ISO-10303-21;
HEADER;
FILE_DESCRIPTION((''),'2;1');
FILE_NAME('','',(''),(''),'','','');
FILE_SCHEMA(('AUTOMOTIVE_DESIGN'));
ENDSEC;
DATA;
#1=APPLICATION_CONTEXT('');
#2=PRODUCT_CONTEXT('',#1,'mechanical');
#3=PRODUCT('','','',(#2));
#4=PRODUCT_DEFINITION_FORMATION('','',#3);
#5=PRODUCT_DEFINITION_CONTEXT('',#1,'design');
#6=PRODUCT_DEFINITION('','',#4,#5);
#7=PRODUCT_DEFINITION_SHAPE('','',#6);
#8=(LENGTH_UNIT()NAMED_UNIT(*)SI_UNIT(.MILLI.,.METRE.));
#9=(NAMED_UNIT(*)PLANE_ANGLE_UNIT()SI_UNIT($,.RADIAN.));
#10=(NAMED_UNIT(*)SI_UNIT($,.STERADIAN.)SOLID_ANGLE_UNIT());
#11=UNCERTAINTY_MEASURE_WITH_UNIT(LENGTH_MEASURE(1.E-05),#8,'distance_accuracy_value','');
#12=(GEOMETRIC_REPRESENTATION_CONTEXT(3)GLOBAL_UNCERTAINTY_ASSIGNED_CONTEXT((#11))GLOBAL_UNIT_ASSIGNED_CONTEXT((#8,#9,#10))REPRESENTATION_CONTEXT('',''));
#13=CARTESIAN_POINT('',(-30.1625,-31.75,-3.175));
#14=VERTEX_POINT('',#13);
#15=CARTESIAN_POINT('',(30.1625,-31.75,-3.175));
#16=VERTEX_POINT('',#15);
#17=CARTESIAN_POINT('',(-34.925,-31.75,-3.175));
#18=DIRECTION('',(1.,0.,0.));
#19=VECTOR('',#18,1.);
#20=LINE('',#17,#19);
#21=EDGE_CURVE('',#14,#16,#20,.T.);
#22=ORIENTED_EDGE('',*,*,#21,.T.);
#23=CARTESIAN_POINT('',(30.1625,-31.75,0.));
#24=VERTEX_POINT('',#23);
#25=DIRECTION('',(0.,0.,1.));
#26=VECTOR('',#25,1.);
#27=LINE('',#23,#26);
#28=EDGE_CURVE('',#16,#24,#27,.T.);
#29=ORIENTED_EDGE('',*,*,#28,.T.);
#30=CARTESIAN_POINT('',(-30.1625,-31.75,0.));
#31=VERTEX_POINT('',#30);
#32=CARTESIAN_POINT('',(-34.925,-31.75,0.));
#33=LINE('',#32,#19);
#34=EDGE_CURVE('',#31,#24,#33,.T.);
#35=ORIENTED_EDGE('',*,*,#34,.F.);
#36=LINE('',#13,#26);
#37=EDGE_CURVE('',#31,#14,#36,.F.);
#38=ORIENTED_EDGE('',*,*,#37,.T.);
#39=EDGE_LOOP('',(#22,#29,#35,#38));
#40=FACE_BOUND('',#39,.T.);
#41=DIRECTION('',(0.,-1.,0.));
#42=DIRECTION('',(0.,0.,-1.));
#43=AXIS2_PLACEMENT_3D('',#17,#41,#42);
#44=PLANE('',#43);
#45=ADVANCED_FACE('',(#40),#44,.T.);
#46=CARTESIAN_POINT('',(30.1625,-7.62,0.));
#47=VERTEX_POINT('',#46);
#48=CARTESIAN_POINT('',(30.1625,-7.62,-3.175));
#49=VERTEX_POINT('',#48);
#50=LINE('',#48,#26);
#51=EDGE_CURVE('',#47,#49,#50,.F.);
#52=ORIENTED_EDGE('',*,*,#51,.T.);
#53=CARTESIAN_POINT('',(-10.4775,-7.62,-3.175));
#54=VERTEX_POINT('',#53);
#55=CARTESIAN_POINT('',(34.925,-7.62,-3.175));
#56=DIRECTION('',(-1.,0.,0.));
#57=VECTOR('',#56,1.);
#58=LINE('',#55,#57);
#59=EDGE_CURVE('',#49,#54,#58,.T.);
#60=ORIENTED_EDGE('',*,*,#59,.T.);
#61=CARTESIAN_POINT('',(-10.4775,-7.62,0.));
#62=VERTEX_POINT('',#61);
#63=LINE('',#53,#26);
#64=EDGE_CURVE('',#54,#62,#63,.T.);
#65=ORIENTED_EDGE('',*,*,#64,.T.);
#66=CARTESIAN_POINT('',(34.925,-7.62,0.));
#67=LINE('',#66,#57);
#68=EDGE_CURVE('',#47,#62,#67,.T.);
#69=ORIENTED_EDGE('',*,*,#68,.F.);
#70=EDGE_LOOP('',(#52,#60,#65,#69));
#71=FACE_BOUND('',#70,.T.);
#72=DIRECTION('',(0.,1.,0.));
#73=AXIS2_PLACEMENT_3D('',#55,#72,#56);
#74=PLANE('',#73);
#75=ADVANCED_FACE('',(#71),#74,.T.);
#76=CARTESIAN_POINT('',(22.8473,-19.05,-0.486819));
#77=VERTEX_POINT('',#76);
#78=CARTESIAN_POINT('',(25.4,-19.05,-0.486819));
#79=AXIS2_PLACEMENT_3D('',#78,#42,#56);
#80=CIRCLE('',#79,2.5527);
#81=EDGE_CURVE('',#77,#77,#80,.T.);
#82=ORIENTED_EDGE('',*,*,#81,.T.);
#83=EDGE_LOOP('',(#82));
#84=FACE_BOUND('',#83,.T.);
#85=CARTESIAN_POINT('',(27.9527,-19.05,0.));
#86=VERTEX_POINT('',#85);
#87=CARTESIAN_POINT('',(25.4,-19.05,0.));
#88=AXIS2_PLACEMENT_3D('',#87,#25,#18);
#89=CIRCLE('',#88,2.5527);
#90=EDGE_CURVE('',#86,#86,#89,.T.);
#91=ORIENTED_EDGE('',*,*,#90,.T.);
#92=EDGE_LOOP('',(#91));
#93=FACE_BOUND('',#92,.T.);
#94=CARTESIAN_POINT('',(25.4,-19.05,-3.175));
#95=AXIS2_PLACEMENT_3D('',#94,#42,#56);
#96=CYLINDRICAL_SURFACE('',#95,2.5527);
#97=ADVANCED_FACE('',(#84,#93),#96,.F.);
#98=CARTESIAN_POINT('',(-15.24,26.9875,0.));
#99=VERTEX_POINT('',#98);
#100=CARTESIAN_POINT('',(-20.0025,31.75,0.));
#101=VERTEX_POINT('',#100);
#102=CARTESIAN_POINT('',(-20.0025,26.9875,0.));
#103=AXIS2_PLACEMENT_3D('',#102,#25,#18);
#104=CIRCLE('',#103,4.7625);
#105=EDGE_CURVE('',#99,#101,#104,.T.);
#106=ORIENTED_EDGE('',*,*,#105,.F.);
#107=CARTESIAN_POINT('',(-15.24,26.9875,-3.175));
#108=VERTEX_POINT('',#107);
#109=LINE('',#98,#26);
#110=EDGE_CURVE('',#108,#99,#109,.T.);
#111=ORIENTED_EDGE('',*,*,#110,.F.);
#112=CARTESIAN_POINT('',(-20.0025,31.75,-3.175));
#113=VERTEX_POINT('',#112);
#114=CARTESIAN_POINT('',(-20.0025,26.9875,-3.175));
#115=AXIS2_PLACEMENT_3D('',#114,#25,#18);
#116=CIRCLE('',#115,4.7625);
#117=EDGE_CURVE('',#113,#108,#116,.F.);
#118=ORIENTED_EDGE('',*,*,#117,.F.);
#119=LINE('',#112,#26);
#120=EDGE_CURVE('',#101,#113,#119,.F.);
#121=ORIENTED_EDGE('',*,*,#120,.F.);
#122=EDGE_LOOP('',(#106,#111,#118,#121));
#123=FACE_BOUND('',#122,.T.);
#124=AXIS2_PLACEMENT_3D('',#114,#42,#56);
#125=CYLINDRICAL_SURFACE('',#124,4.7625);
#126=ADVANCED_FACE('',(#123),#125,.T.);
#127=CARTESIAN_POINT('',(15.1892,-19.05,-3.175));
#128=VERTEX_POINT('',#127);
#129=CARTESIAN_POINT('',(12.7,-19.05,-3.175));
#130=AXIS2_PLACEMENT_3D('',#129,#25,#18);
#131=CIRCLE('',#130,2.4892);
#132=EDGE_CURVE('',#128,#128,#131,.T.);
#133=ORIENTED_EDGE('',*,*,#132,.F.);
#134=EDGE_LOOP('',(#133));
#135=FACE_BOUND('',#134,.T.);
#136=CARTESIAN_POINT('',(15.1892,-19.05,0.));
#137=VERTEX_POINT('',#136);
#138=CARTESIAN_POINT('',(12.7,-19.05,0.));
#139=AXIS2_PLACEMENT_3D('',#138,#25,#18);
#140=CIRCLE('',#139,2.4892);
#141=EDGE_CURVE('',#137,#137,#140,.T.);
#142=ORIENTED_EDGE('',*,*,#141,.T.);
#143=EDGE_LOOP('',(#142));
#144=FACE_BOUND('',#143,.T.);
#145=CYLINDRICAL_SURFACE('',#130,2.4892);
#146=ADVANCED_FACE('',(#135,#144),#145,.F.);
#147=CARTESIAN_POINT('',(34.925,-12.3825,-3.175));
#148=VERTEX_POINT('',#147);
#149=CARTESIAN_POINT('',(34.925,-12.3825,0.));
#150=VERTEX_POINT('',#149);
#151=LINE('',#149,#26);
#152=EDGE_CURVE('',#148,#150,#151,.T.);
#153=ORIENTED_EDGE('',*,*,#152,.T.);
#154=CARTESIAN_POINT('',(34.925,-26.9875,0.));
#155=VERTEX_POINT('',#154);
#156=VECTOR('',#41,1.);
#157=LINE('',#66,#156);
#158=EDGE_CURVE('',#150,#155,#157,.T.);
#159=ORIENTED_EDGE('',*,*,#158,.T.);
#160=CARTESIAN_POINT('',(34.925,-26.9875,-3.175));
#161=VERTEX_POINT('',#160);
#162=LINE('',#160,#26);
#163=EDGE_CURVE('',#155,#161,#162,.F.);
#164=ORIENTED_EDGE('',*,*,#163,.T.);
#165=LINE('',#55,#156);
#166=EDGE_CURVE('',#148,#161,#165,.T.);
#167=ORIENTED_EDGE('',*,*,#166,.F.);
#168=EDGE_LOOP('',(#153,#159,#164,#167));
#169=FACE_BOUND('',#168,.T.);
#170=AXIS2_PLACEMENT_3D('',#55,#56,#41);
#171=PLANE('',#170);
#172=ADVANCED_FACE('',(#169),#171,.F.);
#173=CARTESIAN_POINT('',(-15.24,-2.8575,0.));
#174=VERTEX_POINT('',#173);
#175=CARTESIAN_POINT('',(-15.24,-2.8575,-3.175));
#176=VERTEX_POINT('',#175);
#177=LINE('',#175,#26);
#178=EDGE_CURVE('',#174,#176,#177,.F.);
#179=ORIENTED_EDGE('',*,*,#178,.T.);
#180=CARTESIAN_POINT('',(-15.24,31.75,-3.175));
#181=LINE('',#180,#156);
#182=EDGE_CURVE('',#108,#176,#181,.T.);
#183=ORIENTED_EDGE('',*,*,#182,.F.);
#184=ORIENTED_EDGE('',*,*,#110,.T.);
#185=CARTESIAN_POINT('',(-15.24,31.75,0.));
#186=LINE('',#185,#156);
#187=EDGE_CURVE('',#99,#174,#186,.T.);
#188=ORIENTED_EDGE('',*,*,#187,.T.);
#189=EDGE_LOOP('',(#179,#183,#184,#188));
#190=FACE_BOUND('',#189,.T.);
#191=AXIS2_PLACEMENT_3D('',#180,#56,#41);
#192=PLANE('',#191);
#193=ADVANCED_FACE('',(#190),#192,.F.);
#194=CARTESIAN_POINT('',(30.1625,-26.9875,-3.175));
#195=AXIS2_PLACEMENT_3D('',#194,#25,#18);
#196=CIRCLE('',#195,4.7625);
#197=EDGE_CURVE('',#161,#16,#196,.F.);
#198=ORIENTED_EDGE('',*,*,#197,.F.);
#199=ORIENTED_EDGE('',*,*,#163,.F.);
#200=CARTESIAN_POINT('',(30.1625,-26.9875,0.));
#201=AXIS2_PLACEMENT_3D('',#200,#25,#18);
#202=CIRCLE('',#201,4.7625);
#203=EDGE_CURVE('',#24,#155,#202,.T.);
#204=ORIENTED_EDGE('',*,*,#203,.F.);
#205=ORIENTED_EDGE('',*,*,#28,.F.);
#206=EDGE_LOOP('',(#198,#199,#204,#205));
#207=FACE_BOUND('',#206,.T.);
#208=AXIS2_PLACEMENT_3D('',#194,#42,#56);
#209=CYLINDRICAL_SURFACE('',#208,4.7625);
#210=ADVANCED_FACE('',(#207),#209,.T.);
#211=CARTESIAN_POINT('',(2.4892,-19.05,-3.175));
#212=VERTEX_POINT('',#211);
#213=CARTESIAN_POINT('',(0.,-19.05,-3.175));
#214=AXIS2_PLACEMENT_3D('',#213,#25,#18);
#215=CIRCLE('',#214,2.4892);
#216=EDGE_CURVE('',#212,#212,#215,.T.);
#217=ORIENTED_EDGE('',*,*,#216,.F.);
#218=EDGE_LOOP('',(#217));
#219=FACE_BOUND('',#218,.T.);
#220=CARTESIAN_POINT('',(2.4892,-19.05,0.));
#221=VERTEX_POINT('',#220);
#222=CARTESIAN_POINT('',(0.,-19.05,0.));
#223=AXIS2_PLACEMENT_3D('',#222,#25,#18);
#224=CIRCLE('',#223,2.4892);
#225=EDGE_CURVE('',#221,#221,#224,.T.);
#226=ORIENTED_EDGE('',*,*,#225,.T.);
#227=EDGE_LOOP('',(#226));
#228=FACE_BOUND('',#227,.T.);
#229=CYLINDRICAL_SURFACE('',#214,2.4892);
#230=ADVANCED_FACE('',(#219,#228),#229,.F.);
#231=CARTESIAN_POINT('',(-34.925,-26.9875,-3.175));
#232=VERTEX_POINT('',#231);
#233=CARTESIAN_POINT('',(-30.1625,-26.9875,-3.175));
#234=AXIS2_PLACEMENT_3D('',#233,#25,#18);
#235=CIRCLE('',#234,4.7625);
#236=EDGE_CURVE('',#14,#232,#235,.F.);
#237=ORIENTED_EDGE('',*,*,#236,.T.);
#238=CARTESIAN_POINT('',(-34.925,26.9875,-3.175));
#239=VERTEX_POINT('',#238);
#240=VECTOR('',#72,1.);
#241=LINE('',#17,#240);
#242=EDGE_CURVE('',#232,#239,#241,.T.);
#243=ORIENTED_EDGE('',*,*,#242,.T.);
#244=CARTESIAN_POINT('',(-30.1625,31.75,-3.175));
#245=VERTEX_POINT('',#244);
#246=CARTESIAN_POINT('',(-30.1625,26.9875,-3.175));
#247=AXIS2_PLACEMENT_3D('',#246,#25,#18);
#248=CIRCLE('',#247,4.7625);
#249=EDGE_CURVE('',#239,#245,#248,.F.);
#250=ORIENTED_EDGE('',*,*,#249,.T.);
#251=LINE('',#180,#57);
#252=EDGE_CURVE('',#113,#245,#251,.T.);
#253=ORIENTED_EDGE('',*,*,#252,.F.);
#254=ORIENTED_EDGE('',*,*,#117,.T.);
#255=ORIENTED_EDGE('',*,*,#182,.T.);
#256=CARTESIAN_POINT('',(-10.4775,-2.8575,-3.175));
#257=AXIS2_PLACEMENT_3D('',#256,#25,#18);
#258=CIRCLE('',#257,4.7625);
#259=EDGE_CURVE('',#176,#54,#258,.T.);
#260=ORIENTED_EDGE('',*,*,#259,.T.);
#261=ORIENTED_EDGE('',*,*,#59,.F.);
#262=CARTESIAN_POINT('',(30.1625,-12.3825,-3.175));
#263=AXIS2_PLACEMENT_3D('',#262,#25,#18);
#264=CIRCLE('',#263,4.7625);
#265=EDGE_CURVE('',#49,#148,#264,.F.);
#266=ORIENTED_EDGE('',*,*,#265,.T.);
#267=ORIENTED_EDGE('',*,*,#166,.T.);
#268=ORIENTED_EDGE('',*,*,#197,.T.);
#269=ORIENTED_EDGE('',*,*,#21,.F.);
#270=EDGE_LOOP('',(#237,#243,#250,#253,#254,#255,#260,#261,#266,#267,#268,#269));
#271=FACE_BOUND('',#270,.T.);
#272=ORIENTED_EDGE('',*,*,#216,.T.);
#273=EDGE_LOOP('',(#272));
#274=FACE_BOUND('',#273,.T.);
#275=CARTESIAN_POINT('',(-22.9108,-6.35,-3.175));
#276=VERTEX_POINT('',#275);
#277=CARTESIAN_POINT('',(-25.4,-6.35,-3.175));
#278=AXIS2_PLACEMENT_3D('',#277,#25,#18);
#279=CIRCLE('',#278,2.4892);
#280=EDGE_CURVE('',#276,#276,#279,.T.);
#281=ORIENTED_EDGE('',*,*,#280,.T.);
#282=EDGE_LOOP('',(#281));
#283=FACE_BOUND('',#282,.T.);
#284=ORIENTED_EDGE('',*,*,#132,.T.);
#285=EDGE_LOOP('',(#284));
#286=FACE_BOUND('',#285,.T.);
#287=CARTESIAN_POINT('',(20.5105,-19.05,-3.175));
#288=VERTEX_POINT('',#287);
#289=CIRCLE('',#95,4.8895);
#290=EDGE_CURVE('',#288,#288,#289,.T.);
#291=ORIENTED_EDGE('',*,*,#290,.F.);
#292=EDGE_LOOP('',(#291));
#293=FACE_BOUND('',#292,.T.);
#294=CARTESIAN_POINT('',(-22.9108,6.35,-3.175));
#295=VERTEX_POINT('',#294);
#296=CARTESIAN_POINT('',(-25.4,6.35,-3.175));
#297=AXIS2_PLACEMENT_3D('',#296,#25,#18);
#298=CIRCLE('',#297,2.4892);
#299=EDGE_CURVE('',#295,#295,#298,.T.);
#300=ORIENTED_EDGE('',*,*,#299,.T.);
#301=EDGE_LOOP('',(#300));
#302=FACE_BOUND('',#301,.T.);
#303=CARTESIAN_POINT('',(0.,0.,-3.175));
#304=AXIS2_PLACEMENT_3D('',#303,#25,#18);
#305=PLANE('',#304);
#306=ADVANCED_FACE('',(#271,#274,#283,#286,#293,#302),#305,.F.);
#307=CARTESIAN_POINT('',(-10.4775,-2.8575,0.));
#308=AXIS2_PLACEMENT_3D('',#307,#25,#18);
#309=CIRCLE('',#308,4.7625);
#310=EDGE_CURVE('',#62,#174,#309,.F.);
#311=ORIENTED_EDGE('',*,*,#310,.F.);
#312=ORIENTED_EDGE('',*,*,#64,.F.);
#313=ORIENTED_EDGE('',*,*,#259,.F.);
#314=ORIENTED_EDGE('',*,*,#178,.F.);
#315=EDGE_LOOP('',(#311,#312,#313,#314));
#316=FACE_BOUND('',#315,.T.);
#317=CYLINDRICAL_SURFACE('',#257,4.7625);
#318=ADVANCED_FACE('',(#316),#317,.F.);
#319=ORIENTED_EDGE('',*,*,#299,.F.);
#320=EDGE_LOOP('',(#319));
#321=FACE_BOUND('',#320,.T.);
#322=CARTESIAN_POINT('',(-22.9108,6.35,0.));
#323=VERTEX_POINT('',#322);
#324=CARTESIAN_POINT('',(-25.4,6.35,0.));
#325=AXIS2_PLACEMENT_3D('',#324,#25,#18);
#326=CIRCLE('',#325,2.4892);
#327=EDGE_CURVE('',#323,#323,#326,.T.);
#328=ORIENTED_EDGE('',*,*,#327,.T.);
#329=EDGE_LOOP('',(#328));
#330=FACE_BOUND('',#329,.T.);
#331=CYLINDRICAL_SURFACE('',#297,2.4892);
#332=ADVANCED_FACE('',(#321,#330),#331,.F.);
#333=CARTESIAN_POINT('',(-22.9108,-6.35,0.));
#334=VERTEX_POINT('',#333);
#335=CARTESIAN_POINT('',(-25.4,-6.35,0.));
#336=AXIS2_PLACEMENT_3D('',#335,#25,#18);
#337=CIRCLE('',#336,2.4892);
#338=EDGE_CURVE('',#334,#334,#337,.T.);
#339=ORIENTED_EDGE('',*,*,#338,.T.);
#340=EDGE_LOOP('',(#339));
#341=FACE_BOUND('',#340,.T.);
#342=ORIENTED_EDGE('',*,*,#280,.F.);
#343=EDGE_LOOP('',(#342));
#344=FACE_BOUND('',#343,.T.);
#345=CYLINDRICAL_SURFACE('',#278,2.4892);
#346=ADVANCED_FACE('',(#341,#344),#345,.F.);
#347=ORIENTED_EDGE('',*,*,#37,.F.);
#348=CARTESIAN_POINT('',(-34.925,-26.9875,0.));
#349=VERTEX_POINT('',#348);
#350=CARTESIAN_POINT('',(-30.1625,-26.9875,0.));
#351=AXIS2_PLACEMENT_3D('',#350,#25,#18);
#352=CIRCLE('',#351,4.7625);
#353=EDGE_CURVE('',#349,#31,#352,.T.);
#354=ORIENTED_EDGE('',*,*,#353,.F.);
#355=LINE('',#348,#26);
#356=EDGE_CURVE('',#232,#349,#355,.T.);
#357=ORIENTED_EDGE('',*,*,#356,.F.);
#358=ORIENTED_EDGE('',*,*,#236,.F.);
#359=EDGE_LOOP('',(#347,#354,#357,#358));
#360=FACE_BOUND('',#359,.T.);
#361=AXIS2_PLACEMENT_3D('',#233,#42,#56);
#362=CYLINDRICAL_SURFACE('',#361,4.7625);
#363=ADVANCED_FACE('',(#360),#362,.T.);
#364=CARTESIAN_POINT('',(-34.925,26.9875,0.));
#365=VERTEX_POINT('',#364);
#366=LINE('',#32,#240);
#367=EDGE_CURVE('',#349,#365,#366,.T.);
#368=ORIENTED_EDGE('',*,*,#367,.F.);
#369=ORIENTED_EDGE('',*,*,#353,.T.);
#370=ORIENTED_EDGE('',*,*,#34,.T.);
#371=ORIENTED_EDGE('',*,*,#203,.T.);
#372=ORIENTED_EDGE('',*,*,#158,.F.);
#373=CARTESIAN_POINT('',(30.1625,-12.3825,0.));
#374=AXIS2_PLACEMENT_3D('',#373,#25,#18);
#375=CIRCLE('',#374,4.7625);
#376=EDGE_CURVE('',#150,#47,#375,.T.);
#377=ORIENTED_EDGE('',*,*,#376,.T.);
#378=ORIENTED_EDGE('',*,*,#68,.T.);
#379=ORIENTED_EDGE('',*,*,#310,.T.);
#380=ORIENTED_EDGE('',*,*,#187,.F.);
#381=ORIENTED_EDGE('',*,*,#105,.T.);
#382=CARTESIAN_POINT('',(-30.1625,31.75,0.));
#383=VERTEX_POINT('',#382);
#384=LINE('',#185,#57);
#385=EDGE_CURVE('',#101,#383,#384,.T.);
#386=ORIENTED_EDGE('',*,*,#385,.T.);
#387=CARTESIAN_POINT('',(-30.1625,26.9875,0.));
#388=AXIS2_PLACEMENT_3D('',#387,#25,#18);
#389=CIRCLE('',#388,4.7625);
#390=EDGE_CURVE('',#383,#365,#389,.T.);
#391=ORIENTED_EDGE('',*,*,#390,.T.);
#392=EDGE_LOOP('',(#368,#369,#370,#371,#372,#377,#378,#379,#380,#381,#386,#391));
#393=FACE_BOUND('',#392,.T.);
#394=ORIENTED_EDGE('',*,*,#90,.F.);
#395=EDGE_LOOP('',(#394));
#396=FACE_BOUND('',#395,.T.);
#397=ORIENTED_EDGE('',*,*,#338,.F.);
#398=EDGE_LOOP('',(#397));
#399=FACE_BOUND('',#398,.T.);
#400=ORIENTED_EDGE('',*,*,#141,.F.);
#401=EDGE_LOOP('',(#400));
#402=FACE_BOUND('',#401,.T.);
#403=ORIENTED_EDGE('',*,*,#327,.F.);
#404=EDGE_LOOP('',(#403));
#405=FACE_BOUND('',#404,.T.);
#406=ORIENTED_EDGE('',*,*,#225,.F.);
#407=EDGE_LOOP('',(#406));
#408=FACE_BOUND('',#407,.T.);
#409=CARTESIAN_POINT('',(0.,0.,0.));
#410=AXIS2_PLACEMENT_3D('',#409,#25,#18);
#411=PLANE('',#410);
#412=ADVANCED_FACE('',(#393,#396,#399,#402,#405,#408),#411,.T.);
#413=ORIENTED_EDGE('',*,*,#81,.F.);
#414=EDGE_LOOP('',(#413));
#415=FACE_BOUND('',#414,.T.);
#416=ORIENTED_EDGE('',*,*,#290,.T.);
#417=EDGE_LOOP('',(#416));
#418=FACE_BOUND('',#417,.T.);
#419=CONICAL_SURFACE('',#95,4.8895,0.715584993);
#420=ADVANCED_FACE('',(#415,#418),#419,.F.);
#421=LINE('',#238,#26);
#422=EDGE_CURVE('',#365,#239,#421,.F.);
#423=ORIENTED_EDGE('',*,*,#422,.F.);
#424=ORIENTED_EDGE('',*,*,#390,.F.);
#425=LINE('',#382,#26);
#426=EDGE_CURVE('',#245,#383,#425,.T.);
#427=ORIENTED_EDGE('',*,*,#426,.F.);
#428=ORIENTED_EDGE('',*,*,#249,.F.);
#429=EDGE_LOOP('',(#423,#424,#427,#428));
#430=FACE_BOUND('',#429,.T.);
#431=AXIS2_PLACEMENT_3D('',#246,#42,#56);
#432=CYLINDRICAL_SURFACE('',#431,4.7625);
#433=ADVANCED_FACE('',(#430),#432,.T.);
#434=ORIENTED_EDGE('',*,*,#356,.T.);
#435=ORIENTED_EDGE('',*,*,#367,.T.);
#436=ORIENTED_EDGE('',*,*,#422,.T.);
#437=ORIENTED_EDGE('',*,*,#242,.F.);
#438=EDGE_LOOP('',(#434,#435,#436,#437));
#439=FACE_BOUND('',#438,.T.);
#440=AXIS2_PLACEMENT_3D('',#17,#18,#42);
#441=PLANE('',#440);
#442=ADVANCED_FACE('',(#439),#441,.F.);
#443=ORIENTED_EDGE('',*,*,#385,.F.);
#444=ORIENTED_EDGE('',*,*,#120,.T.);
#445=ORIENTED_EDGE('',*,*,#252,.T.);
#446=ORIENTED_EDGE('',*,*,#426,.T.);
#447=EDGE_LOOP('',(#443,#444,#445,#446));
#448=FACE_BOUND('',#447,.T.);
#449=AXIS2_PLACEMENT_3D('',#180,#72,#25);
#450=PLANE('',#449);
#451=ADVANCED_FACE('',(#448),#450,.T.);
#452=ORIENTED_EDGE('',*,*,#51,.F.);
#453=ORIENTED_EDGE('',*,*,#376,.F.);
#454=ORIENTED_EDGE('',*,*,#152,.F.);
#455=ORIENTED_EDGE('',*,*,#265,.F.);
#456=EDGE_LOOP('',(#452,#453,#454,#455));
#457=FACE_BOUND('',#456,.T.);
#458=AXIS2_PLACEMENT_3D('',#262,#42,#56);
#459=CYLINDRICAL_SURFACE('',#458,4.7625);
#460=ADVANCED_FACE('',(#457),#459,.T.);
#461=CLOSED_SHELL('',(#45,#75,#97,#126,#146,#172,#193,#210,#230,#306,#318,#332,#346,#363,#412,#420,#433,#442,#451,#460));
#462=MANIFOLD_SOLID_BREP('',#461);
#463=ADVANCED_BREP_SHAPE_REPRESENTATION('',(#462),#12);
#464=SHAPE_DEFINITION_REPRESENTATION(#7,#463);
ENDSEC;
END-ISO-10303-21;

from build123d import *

# Parameters (mm, degrees)
SKETCH1_R                                       = 2.4892
BASE_FLANGE1_DEPTH                              = 3.175
FILLET2_R                                       = 4.7625
CSK_FOR_10_FLAT_HEAD_MACHINE_SCREW1_D           = 5.1054
CSK_FOR_10_FLAT_HEAD_MACHINE_SCREW1_DEPTH       = 19.05
CSK_FOR_10_FLAT_HEAD_MACHINE_SCREW1_CSINK_D     = 9.779
CSK_FOR_10_FLAT_HEAD_MACHINE_SCREW1_CSINK_ANGLE = 82
CSK_FOR_10_FLAT_HEAD_MACHINE_SCREW1_TIP         = 1.533816902


# Sheet-metal steps are written as plain solids
with BuildPart() as part:
    # Sketch1 → Base-Flange1 (new body)
    with BuildSketch(Plane.XY):
        Polygon((-15.24, 31.75), (-34.925, 31.75), (-34.925, -31.75), (34.925, -31.75), (34.925, -7.62), (-15.24, -7.62), align=None)
        with Locations((-25.4, -6.35)):
            Circle(SKETCH1_R, mode=Mode.SUBTRACT)
        with Locations((-25.4, 6.35)):
            Circle(SKETCH1_R, mode=Mode.SUBTRACT)
        with Locations((0, -19.05)):
            Circle(SKETCH1_R, mode=Mode.SUBTRACT)
        with Locations((12.7, -19.05)):
            Circle(SKETCH1_R, mode=Mode.SUBTRACT)
        with Locations((25.4, -19.05)):
            Circle(SKETCH1_R, mode=Mode.SUBTRACT)
    extrude(amount=-BASE_FLANGE1_DEPTH)

    # Fillet2
    fillet2_edges = [part.edges().sort_by_distance(p)[0] for p in [
        (-34.925, -31.75, -1.5875),
        (34.925, -31.75, -1.5875),
        (34.925, -7.62, -1.5875),
        (-15.24, -7.62, -1.5875),
        (-15.24, 31.75, -1.5875),
        (-34.925, 31.75, -1.5875),
    ]]
    fillet(fillet2_edges, radius=FILLET2_R)

    # CSK for #10 Flat Head Machine Screw1
    with Locations(Plane(origin=(0, 0, -3.175), x_dir=(-1, 0, 0), z_dir=(0, 0, -1))):
        with Locations((-25.4, -19.05)):
            CounterSinkHole(CSK_FOR_10_FLAT_HEAD_MACHINE_SCREW1_D / 2, CSK_FOR_10_FLAT_HEAD_MACHINE_SCREW1_CSINK_D / 2, depth=CSK_FOR_10_FLAT_HEAD_MACHINE_SCREW1_DEPTH, counter_sink_angle=CSK_FOR_10_FLAT_HEAD_MACHINE_SCREW1_CSINK_ANGLE)
            with Locations((0, 0, -(CSK_FOR_10_FLAT_HEAD_MACHINE_SCREW1_DEPTH + CSK_FOR_10_FLAT_HEAD_MACHINE_SCREW1_TIP / 2))):  # 118° drill point
                Cone(0, CSK_FOR_10_FLAT_HEAD_MACHINE_SCREW1_D / 2, CSK_FOR_10_FLAT_HEAD_MACHINE_SCREW1_TIP, mode=Mode.SUBTRACT)


solid = part.part
